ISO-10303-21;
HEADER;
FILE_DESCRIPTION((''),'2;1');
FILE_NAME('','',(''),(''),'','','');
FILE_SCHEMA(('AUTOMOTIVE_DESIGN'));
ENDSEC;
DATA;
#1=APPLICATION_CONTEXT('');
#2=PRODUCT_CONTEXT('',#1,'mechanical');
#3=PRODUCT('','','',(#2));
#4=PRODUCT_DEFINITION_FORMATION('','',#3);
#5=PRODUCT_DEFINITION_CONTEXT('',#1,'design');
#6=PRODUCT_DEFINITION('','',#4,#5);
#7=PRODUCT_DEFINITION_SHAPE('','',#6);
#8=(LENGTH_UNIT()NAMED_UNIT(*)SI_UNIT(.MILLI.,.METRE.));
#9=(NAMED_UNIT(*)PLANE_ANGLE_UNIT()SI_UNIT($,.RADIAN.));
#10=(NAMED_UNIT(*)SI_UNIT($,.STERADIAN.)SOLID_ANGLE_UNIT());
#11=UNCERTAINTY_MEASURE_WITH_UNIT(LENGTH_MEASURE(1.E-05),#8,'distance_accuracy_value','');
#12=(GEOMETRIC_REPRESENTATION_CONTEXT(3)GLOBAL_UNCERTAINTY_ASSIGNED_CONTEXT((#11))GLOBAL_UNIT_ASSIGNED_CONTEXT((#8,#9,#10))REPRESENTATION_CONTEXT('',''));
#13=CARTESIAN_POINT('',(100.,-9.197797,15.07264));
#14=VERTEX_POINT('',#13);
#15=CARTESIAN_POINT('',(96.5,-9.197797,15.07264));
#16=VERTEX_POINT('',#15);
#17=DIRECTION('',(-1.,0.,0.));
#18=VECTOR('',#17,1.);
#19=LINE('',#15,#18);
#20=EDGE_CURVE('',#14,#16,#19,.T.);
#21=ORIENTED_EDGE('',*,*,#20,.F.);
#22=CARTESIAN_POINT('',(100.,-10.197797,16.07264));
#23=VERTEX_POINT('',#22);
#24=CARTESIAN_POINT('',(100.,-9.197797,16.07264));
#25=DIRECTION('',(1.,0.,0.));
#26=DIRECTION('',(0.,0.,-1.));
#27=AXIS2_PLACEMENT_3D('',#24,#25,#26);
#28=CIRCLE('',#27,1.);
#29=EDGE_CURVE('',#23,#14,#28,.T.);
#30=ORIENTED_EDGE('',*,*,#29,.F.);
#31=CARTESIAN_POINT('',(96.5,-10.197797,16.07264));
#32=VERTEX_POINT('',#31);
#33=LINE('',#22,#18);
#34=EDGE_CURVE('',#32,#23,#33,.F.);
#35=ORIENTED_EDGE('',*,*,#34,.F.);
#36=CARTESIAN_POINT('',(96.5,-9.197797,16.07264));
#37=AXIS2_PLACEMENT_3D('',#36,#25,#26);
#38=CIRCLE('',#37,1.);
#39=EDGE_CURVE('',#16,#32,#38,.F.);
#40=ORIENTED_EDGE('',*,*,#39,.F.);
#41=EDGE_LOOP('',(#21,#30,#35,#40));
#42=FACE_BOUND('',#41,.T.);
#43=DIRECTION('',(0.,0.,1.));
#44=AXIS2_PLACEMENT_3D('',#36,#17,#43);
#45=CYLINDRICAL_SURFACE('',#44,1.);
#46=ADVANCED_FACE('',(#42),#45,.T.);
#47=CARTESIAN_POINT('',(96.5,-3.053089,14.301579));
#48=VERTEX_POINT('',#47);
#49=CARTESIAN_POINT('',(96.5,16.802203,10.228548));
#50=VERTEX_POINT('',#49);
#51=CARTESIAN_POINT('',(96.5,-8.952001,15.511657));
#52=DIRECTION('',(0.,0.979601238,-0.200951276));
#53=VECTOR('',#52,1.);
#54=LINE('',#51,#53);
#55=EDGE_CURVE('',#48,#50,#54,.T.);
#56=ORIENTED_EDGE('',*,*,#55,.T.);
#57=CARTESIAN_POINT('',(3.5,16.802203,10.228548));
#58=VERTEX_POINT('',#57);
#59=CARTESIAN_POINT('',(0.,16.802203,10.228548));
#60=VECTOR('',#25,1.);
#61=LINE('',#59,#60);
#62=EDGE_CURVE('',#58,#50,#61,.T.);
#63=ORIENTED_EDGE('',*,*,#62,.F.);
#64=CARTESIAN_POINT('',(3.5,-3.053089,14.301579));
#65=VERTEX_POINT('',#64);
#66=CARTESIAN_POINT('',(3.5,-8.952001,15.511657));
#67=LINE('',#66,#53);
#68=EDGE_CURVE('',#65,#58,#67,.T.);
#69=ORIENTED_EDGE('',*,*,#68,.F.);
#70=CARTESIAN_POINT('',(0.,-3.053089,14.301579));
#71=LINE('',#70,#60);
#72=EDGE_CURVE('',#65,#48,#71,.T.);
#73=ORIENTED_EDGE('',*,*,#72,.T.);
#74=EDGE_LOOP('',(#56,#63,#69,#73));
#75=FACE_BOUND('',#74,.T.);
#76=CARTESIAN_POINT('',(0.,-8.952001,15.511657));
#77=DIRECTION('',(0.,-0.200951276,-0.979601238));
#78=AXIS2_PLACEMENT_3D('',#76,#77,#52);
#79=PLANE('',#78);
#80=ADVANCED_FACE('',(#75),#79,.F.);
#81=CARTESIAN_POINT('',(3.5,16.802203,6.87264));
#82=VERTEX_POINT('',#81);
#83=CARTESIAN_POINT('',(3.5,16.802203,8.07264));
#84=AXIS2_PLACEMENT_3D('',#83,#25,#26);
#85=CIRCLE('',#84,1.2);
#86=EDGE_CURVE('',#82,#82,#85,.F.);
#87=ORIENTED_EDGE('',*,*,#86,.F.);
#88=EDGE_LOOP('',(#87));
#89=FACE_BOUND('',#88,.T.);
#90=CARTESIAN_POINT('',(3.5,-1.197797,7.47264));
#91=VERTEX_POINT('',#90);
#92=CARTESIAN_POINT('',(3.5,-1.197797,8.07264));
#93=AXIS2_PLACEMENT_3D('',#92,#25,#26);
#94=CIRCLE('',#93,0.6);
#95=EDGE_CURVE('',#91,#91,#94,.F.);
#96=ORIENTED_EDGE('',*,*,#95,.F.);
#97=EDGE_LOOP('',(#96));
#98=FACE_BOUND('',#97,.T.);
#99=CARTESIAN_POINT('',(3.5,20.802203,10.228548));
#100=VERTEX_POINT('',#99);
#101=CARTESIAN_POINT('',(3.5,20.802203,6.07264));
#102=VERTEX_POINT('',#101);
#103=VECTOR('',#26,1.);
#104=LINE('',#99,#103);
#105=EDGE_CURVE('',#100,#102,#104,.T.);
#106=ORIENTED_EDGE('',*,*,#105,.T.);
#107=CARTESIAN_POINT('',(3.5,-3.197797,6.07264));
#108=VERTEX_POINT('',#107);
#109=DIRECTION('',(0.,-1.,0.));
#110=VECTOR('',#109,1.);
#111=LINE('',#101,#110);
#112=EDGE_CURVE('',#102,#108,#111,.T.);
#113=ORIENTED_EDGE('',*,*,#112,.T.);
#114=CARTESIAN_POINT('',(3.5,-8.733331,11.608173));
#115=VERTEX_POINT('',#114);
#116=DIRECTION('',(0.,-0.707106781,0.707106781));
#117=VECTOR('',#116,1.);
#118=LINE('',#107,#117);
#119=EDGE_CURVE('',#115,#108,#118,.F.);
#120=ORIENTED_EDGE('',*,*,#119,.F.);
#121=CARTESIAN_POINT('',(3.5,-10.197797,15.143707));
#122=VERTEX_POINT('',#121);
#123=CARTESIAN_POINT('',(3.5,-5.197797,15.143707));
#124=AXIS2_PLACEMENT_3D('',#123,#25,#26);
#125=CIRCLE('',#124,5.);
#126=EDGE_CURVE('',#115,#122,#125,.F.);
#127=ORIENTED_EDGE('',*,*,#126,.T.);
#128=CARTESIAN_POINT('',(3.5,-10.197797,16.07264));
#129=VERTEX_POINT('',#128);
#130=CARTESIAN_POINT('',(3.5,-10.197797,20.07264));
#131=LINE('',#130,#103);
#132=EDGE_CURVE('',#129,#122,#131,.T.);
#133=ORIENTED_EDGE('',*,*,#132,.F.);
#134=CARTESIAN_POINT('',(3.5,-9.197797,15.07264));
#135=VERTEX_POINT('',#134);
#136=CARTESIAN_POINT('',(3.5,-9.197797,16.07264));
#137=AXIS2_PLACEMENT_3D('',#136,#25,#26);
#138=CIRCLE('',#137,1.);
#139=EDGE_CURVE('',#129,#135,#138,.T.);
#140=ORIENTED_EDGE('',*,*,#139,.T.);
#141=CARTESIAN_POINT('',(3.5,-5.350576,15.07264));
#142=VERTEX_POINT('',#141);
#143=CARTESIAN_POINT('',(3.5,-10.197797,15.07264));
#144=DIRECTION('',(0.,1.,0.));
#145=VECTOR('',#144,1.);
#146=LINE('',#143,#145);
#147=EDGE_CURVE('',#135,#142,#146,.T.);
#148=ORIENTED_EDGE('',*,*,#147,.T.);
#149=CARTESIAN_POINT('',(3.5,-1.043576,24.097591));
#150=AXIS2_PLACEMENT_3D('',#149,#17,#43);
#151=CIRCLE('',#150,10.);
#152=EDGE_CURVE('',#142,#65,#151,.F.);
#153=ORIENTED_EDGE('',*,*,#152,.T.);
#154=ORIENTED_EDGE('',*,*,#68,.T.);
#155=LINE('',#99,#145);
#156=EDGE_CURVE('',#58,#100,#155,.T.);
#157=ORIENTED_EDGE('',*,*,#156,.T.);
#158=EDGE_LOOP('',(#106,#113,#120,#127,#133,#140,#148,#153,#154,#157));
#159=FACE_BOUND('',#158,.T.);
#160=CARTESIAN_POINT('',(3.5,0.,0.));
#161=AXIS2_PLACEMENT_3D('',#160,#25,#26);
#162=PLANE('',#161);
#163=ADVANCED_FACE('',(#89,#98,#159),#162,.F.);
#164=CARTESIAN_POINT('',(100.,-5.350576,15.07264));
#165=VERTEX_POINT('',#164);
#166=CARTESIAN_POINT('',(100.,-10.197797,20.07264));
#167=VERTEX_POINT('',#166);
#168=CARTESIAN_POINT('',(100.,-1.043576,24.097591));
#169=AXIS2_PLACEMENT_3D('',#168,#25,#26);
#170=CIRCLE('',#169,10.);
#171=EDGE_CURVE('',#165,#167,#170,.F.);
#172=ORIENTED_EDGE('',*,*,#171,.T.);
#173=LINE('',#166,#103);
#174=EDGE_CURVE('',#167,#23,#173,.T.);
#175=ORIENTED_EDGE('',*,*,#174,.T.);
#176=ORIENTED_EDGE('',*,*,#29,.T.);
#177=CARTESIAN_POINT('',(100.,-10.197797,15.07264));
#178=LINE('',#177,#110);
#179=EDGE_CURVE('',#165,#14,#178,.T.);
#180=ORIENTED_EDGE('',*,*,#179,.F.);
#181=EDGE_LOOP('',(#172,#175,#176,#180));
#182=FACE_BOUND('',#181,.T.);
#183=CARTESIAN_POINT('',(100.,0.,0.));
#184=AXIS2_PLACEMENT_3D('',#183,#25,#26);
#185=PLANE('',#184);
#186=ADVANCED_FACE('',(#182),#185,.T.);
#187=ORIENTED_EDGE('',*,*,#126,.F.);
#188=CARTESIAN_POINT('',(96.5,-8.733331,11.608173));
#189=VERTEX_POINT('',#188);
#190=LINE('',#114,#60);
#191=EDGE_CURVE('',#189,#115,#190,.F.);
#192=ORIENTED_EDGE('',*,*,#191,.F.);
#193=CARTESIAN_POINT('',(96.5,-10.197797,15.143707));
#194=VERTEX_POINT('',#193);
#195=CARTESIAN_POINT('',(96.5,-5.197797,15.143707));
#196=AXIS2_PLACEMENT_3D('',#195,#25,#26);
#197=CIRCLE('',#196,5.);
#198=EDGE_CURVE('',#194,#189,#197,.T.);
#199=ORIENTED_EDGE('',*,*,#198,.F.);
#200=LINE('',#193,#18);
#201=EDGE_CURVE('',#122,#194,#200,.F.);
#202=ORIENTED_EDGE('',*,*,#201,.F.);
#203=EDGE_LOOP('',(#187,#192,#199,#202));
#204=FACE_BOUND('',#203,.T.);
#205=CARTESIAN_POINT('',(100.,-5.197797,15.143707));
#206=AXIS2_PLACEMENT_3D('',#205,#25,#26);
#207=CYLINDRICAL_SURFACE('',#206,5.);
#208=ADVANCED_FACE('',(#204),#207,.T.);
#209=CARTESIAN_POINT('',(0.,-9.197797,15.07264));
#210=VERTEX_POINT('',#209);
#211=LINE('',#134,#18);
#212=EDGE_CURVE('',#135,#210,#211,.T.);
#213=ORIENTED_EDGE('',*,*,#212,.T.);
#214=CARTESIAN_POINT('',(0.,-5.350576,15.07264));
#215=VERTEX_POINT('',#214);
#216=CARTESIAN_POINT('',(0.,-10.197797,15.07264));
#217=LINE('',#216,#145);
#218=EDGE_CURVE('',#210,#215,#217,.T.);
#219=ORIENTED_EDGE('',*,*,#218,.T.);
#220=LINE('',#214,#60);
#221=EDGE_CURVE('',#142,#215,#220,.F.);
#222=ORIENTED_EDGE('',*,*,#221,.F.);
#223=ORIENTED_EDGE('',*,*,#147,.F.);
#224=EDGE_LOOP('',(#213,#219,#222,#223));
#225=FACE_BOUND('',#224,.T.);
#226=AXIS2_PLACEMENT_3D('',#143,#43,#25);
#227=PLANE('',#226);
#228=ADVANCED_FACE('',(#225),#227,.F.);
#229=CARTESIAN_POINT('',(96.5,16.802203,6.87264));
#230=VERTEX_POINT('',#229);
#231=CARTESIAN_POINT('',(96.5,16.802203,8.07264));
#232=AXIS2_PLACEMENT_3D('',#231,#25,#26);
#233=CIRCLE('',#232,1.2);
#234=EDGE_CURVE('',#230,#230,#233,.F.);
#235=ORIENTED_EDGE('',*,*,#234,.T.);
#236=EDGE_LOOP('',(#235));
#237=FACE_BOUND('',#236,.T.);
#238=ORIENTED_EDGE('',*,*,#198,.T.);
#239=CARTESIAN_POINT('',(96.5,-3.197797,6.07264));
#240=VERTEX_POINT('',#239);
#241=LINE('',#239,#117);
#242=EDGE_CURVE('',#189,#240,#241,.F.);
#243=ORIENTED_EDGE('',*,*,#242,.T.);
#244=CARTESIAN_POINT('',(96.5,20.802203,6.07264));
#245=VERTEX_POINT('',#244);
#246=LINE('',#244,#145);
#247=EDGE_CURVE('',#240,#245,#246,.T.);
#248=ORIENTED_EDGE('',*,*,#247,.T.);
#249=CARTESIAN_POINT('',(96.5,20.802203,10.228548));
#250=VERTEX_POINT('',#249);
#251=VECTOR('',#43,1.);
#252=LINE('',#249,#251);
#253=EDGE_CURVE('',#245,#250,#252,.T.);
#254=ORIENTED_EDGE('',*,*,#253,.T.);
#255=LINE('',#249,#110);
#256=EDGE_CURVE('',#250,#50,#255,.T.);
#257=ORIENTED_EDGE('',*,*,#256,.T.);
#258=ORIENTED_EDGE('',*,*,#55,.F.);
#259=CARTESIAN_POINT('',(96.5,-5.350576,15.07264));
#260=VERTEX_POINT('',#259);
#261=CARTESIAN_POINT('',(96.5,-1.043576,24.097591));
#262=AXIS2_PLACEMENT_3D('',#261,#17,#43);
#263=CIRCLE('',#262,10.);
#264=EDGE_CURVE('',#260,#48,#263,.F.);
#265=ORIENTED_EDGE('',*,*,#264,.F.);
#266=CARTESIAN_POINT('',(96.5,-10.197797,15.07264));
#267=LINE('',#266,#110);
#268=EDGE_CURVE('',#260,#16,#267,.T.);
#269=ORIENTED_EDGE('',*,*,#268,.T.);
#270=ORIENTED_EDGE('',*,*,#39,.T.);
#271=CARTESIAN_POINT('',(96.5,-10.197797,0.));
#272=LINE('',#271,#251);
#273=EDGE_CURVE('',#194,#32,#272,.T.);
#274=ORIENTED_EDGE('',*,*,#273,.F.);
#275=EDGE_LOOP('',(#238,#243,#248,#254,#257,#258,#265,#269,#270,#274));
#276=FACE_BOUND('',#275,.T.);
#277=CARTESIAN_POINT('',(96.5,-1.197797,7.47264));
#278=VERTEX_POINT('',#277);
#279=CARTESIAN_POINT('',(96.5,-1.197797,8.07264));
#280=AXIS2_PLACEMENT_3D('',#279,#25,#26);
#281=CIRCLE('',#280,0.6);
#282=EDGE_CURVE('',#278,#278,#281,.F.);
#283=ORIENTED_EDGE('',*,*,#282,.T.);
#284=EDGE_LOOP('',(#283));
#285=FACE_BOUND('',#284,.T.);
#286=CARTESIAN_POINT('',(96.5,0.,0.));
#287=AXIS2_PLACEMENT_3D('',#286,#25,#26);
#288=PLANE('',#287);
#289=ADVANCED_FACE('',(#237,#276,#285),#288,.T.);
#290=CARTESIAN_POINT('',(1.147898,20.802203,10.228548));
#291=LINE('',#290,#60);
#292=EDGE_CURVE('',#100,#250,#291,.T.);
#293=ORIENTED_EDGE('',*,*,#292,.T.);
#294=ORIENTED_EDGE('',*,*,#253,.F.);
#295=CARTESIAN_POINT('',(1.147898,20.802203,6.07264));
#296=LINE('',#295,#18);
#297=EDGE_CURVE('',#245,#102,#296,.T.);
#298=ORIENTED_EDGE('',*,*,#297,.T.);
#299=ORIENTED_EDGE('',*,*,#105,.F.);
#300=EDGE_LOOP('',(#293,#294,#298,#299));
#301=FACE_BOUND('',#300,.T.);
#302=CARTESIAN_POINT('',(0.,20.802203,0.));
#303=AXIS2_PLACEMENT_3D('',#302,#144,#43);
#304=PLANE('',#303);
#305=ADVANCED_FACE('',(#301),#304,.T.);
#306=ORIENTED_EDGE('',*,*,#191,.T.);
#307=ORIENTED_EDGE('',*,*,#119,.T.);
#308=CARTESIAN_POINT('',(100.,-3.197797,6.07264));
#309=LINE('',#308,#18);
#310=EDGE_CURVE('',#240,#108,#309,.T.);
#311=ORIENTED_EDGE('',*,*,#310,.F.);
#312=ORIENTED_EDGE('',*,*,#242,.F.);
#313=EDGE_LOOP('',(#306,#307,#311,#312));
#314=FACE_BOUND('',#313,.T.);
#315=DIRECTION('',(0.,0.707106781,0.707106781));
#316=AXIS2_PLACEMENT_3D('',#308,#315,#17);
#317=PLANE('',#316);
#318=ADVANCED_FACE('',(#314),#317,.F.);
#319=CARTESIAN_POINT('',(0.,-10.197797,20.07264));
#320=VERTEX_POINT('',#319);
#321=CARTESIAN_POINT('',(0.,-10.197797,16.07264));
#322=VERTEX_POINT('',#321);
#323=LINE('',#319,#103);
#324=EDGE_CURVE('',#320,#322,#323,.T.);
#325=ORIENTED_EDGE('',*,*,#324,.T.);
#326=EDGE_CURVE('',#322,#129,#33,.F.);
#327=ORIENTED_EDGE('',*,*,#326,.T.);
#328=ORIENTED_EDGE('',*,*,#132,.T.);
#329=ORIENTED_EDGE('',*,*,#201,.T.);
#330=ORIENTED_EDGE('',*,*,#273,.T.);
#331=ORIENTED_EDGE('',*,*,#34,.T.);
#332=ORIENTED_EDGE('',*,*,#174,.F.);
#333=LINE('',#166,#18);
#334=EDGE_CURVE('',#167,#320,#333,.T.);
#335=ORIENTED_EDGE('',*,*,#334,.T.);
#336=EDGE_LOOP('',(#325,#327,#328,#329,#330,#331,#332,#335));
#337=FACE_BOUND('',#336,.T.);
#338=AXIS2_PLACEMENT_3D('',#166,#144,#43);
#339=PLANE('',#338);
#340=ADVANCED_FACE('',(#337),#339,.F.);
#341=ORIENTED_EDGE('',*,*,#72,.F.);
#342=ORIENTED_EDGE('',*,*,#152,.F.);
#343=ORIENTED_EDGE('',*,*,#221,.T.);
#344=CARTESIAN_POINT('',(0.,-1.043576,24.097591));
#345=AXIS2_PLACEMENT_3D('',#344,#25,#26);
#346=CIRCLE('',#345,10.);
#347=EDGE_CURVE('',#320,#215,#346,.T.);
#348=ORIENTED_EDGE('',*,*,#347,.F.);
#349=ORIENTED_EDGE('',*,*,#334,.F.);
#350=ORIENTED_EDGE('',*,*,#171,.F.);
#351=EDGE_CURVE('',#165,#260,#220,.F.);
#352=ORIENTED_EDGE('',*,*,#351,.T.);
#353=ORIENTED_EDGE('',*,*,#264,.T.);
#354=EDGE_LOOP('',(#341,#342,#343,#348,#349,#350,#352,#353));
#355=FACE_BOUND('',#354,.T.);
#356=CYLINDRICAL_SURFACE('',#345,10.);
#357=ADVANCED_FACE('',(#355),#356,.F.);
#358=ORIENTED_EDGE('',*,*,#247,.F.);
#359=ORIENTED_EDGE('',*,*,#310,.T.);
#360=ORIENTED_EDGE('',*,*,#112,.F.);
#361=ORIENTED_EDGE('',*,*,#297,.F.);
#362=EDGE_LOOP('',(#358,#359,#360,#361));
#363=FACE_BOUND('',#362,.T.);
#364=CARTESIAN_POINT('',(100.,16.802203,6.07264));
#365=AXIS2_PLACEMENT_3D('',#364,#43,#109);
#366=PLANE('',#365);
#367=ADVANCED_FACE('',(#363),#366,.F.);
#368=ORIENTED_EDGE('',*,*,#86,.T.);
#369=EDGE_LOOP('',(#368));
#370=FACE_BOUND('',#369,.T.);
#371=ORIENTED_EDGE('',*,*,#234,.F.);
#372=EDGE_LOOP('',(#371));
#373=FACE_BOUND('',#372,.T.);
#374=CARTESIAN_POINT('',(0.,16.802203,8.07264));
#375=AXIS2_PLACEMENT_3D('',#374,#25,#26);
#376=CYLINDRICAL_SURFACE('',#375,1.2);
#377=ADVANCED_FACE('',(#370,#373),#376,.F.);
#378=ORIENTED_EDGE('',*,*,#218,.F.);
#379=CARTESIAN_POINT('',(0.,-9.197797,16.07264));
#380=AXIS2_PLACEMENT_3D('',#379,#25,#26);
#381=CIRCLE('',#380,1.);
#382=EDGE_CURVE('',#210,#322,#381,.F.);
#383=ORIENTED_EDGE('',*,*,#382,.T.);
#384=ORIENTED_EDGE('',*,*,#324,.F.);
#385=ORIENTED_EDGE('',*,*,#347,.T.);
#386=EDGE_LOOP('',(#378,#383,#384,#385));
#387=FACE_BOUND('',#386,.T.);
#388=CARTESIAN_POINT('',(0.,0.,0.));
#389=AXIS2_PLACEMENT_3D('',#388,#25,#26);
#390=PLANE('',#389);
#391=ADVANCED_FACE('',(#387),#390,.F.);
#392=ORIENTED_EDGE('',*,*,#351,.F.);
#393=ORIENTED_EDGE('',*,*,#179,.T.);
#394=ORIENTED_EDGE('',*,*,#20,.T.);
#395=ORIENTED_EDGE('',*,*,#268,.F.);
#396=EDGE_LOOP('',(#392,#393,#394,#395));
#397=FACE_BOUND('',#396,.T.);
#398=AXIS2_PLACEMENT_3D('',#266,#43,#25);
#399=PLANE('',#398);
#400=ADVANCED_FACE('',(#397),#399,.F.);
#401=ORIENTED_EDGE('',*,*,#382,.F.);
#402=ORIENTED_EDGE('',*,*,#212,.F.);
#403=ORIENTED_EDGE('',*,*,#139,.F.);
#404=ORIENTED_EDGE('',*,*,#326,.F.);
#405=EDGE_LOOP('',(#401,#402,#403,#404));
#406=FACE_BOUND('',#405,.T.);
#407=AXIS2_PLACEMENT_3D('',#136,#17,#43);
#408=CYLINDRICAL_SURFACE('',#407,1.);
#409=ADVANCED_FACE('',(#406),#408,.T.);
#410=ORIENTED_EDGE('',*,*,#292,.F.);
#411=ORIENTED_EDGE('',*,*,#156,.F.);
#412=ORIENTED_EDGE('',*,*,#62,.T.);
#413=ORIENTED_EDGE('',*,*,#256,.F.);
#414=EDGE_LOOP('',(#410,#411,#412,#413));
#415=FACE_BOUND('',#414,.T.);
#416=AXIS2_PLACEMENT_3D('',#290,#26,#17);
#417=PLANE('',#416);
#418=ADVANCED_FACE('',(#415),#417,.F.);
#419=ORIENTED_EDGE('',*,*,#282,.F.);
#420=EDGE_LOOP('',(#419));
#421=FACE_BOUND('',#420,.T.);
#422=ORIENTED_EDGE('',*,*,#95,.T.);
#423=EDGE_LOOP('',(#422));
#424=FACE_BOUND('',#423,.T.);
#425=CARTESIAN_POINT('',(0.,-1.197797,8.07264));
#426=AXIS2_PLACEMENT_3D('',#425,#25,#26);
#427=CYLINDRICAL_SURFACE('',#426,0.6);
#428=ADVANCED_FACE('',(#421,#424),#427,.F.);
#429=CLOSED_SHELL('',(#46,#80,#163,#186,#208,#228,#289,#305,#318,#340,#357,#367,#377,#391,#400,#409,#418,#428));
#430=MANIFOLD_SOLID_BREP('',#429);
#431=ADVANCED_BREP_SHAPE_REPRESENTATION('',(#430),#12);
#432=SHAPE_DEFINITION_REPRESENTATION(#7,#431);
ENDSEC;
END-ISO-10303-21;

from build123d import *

# Parameters (mm, degrees)
SKETCH1_W           = 14
SKETCH1_H           = 27
BOSS_EXTRUDE1_DEPTH = 100
CUT_EXTRUDE1_DEPTH  = 100
FILLET1_R           = 10
SKETCH4_W           = 98.852101938
SKETCH4_H           = 4.155908349
BOSS_EXTRUDE2_DEPTH = 4
SKETCH5_R           = 1.2
SKETCH5_R_2         = 0.6
CUT_EXTRUDE2_DEPTH  = 100
CHAMFER1_SIZE       = 7
SKETCH6_W           = 4.155908349
SKETCH6_H           = 24
CUT_EXTRUDE3_DEPTH  = 3.5
SKETCH8_W           = 1.147898062
SKETCH8_H           = 4.155908349
BOSS_EXTRUDE3_DEPTH = 4
SKETCH9_W           = 4.155908349
SKETCH9_H           = 24
CUT_EXTRUDE4_DEPTH  = 3.5
SKETCH10_W          = 10.233519384
SKETCH10_H          = 31.339386183
CUT_EXTRUDE5_DEPTH  = 3.5
SKETCH11_W          = 18.924548437
SKETCH11_H          = 36.127134787
CUT_EXTRUDE7_DEPTH  = 3.5
FILLET2_R           = 5
FILLET5_R           = 1
FILLET6_R           = 1


with BuildPart() as part:
    # Sketch1 → Boss-Extrude1 (new body)
    with BuildSketch(Plane(origin=(0, 0, 0), x_dir=(0, 0, -1), z_dir=(1, 0, 0))):
        with Locations((-13.07263952, 3.302202671)):
            Rectangle(SKETCH1_W, SKETCH1_H)
    extrude(amount=BOSS_EXTRUDE1_DEPTH)

    # Sketch2 → Cut-Extrude1 (cut)
    with BuildSketch(Plane(origin=(100, 0, 0), x_dir=(0, 0, -1), z_dir=(1, 0, 0))):
        Polygon((-20.07263952, -10.197797329), (-15.511656896, -8.952001224), (-10.228547869, 16.802202671), (-20.07263952, 16.802202671), align=None)
    extrude(amount=-CUT_EXTRUDE1_DEPTH, mode=Mode.SUBTRACT)

    # Fillet1
    # the kernel refuses this fillet: 10 mm, written as the material it adds along each edge
    with BuildSketch(Plane(origin=(100, -8.952001224, 15.511656896), x_dir=(0, 0.9796012375346099, -0.20095127623546138), z_dir=(-1, 0, 0))) as fillet1_piece_1_section:
        with BuildLine():
            CenterArc((6.021748433, -10), FILLET1_R, 90, 54.673150745)
            Line((-2.136918685, -4.217599905), (-2.300092028, -4.101951904))
            ThreePointArc((-2.300092028, -4.101951904), (-1.246866474, -2.018406947), (-0.178407131, 0.090393006))
            Line((-0.178407131, 0.090393006), (0, 0.2))
            Line((0, 0.2), (6.021748433, 0.2))
            Line((6.021748433, 0.2), (6.021748433, 0))
        make_face()
    fillet1_piece_1 = extrude(amount=100, mode=Mode.PRIVATE)
    fillet1_piece_1 = split(fillet1_piece_1, bisect_by=Plane(origin=(50, -10.197797329, 16.270514602), z_dir=(0, 1, 0)), keep=Keep.TOP, mode=Mode.PRIVATE)
    add(fillet1_piece_1)

    # Sketch4 → Boss-Extrude2 (add)
    with BuildSketch(Plane(origin=(0, 16.802202671, 0), x_dir=(1, 0, 0), z_dir=(0, 1, 0))):
        with Locations((50.573949031, -8.150593694)):
            Rectangle(SKETCH4_W, SKETCH4_H)
    extrude(amount=BOSS_EXTRUDE2_DEPTH)

    # Sketch5 → Cut-Extrude2 (cut)
    with BuildSketch(Plane(origin=(100, 0, 0), x_dir=(0, 0, -1), z_dir=(1, 0, 0))):
        with Locations((-8.07263952, 16.802202671)):
            Circle(SKETCH5_R)
        with Locations((-8.07263952, -1.197797329)):
            Circle(SKETCH5_R_2)
    extrude(amount=-CUT_EXTRUDE2_DEPTH, mode=Mode.SUBTRACT)

    # Chamfer1
    chamfer1_edges = [part.edges().sort_by_distance(p)[0] for p in [
        (50, -10.197797329, 6.07263952),
    ]]
    chamfer(chamfer1_edges, length=CHAMFER1_SIZE)

    # Sketch6 → Cut-Extrude3 (cut)
    with BuildSketch(Plane(origin=(100, 0, 0), x_dir=(0, 0, -1), z_dir=(1, 0, 0))):
        with Locations((-8.150593694, 8.802202671)):
            Rectangle(SKETCH6_W, SKETCH6_H)
    extrude(amount=-CUT_EXTRUDE3_DEPTH, mode=Mode.SUBTRACT)

    # Sketch8 → Boss-Extrude3 (add)
    with BuildSketch(Plane(origin=(0, 16.802202671, 0), x_dir=(1, 0, 0), z_dir=(0, 1, 0))):
        with Locations((0.573949031, -8.150593694)):
            Rectangle(SKETCH8_W, SKETCH8_H)
    extrude(amount=BOSS_EXTRUDE3_DEPTH)

    # Sketch9 → Cut-Extrude4 (cut)
    with BuildSketch(Plane.ZY):
        with Locations((8.150593694, 8.802202671)):
            Rectangle(SKETCH9_W, SKETCH9_H)
    extrude(amount=-CUT_EXTRUDE4_DEPTH, mode=Mode.SUBTRACT)

    # Sketch10 → Cut-Extrude5 (cut)
    with BuildSketch(Plane.ZY):
        with Locations((9.955879828, 5.471895763)):
            Rectangle(SKETCH10_W, SKETCH10_H)
    extrude(amount=-CUT_EXTRUDE5_DEPTH, mode=Mode.SUBTRACT)

    # Sketch11 → Cut-Extrude7 (cut)
    with BuildSketch(Plane(origin=(100, 0, 0), x_dir=(0, 0, -1), z_dir=(1, 0, 0))):
        with Locations((-5.610365301, 7.865770065)):
            Rectangle(SKETCH11_W, SKETCH11_H)
    extrude(amount=-CUT_EXTRUDE7_DEPTH, mode=Mode.SUBTRACT)

    # Fillet2
    fillet2_edges = [part.edges().sort_by_distance(p)[0] for p in [
        (50, -10.197797329, 13.07263952),
    ]]
    fillet(fillet2_edges, radius=FILLET2_R)

    # Fillet5
    # the kernel refuses this fillet: 1 mm, written as the material it takes off along each edge
    with BuildSketch(Plane(origin=(102.500000319, -10.19729224, 15.07263952), x_dir=(0, -0.0005050888353824425, 0.9999998724426261), z_dir=(-1, 0, 0))) as fillet5_piece_1:
        with BuildLine():
            CenterArc((0.999495039, 0.999999872), FILLET5_R, 180.02893946, 90)
            Line((-0.000504834, 0.999494784), (-0.100504821, 0.999444275))
            Line((-0.100504821, 0.999444275), (-0.099999987, -5.0509e-05))
            Line((-0.099999987, -5.0509e-05), (-0.001370852, -0.099990603))
            ThreePointArc((-0.001370852, -0.099990603), (0.071118567, -0.100469181), (1.000050636, -0.099999987))
            Line((1.000050636, -0.099999987), (1.000000128, 0))
        make_face()
    extrude(amount=6.000000319, mode=Mode.SUBTRACT)

    # Fillet6
    # the kernel refuses this fillet: 1 mm, written as the material it takes off along each edge
    with BuildSketch(Plane(origin=(-2.500000319, -10.19729224, 15.07263952), x_dir=(0, 1, 0), z_dir=(1, 0, 0))) as fillet6_piece_1:
        with BuildLine():
            CenterArc((0.999494911, 1), FILLET6_R, 180, 90)
            Line((-0.000505089, 1), (-0.100505089, 1))
            ThreePointArc((-0.100505089, 1), (-0.100505089, 0.071067812), (-0.099989898, -0.001421356))
            Line((-0.099989898, -0.001421356), (0, -0.1))
            Line((0, -0.1), (0.999494911, -0.1))
            Line((0.999494911, -0.1), (0.999494911, 0))
        make_face()
    extrude(amount=6.000000319, mode=Mode.SUBTRACT)


solid = part.part
